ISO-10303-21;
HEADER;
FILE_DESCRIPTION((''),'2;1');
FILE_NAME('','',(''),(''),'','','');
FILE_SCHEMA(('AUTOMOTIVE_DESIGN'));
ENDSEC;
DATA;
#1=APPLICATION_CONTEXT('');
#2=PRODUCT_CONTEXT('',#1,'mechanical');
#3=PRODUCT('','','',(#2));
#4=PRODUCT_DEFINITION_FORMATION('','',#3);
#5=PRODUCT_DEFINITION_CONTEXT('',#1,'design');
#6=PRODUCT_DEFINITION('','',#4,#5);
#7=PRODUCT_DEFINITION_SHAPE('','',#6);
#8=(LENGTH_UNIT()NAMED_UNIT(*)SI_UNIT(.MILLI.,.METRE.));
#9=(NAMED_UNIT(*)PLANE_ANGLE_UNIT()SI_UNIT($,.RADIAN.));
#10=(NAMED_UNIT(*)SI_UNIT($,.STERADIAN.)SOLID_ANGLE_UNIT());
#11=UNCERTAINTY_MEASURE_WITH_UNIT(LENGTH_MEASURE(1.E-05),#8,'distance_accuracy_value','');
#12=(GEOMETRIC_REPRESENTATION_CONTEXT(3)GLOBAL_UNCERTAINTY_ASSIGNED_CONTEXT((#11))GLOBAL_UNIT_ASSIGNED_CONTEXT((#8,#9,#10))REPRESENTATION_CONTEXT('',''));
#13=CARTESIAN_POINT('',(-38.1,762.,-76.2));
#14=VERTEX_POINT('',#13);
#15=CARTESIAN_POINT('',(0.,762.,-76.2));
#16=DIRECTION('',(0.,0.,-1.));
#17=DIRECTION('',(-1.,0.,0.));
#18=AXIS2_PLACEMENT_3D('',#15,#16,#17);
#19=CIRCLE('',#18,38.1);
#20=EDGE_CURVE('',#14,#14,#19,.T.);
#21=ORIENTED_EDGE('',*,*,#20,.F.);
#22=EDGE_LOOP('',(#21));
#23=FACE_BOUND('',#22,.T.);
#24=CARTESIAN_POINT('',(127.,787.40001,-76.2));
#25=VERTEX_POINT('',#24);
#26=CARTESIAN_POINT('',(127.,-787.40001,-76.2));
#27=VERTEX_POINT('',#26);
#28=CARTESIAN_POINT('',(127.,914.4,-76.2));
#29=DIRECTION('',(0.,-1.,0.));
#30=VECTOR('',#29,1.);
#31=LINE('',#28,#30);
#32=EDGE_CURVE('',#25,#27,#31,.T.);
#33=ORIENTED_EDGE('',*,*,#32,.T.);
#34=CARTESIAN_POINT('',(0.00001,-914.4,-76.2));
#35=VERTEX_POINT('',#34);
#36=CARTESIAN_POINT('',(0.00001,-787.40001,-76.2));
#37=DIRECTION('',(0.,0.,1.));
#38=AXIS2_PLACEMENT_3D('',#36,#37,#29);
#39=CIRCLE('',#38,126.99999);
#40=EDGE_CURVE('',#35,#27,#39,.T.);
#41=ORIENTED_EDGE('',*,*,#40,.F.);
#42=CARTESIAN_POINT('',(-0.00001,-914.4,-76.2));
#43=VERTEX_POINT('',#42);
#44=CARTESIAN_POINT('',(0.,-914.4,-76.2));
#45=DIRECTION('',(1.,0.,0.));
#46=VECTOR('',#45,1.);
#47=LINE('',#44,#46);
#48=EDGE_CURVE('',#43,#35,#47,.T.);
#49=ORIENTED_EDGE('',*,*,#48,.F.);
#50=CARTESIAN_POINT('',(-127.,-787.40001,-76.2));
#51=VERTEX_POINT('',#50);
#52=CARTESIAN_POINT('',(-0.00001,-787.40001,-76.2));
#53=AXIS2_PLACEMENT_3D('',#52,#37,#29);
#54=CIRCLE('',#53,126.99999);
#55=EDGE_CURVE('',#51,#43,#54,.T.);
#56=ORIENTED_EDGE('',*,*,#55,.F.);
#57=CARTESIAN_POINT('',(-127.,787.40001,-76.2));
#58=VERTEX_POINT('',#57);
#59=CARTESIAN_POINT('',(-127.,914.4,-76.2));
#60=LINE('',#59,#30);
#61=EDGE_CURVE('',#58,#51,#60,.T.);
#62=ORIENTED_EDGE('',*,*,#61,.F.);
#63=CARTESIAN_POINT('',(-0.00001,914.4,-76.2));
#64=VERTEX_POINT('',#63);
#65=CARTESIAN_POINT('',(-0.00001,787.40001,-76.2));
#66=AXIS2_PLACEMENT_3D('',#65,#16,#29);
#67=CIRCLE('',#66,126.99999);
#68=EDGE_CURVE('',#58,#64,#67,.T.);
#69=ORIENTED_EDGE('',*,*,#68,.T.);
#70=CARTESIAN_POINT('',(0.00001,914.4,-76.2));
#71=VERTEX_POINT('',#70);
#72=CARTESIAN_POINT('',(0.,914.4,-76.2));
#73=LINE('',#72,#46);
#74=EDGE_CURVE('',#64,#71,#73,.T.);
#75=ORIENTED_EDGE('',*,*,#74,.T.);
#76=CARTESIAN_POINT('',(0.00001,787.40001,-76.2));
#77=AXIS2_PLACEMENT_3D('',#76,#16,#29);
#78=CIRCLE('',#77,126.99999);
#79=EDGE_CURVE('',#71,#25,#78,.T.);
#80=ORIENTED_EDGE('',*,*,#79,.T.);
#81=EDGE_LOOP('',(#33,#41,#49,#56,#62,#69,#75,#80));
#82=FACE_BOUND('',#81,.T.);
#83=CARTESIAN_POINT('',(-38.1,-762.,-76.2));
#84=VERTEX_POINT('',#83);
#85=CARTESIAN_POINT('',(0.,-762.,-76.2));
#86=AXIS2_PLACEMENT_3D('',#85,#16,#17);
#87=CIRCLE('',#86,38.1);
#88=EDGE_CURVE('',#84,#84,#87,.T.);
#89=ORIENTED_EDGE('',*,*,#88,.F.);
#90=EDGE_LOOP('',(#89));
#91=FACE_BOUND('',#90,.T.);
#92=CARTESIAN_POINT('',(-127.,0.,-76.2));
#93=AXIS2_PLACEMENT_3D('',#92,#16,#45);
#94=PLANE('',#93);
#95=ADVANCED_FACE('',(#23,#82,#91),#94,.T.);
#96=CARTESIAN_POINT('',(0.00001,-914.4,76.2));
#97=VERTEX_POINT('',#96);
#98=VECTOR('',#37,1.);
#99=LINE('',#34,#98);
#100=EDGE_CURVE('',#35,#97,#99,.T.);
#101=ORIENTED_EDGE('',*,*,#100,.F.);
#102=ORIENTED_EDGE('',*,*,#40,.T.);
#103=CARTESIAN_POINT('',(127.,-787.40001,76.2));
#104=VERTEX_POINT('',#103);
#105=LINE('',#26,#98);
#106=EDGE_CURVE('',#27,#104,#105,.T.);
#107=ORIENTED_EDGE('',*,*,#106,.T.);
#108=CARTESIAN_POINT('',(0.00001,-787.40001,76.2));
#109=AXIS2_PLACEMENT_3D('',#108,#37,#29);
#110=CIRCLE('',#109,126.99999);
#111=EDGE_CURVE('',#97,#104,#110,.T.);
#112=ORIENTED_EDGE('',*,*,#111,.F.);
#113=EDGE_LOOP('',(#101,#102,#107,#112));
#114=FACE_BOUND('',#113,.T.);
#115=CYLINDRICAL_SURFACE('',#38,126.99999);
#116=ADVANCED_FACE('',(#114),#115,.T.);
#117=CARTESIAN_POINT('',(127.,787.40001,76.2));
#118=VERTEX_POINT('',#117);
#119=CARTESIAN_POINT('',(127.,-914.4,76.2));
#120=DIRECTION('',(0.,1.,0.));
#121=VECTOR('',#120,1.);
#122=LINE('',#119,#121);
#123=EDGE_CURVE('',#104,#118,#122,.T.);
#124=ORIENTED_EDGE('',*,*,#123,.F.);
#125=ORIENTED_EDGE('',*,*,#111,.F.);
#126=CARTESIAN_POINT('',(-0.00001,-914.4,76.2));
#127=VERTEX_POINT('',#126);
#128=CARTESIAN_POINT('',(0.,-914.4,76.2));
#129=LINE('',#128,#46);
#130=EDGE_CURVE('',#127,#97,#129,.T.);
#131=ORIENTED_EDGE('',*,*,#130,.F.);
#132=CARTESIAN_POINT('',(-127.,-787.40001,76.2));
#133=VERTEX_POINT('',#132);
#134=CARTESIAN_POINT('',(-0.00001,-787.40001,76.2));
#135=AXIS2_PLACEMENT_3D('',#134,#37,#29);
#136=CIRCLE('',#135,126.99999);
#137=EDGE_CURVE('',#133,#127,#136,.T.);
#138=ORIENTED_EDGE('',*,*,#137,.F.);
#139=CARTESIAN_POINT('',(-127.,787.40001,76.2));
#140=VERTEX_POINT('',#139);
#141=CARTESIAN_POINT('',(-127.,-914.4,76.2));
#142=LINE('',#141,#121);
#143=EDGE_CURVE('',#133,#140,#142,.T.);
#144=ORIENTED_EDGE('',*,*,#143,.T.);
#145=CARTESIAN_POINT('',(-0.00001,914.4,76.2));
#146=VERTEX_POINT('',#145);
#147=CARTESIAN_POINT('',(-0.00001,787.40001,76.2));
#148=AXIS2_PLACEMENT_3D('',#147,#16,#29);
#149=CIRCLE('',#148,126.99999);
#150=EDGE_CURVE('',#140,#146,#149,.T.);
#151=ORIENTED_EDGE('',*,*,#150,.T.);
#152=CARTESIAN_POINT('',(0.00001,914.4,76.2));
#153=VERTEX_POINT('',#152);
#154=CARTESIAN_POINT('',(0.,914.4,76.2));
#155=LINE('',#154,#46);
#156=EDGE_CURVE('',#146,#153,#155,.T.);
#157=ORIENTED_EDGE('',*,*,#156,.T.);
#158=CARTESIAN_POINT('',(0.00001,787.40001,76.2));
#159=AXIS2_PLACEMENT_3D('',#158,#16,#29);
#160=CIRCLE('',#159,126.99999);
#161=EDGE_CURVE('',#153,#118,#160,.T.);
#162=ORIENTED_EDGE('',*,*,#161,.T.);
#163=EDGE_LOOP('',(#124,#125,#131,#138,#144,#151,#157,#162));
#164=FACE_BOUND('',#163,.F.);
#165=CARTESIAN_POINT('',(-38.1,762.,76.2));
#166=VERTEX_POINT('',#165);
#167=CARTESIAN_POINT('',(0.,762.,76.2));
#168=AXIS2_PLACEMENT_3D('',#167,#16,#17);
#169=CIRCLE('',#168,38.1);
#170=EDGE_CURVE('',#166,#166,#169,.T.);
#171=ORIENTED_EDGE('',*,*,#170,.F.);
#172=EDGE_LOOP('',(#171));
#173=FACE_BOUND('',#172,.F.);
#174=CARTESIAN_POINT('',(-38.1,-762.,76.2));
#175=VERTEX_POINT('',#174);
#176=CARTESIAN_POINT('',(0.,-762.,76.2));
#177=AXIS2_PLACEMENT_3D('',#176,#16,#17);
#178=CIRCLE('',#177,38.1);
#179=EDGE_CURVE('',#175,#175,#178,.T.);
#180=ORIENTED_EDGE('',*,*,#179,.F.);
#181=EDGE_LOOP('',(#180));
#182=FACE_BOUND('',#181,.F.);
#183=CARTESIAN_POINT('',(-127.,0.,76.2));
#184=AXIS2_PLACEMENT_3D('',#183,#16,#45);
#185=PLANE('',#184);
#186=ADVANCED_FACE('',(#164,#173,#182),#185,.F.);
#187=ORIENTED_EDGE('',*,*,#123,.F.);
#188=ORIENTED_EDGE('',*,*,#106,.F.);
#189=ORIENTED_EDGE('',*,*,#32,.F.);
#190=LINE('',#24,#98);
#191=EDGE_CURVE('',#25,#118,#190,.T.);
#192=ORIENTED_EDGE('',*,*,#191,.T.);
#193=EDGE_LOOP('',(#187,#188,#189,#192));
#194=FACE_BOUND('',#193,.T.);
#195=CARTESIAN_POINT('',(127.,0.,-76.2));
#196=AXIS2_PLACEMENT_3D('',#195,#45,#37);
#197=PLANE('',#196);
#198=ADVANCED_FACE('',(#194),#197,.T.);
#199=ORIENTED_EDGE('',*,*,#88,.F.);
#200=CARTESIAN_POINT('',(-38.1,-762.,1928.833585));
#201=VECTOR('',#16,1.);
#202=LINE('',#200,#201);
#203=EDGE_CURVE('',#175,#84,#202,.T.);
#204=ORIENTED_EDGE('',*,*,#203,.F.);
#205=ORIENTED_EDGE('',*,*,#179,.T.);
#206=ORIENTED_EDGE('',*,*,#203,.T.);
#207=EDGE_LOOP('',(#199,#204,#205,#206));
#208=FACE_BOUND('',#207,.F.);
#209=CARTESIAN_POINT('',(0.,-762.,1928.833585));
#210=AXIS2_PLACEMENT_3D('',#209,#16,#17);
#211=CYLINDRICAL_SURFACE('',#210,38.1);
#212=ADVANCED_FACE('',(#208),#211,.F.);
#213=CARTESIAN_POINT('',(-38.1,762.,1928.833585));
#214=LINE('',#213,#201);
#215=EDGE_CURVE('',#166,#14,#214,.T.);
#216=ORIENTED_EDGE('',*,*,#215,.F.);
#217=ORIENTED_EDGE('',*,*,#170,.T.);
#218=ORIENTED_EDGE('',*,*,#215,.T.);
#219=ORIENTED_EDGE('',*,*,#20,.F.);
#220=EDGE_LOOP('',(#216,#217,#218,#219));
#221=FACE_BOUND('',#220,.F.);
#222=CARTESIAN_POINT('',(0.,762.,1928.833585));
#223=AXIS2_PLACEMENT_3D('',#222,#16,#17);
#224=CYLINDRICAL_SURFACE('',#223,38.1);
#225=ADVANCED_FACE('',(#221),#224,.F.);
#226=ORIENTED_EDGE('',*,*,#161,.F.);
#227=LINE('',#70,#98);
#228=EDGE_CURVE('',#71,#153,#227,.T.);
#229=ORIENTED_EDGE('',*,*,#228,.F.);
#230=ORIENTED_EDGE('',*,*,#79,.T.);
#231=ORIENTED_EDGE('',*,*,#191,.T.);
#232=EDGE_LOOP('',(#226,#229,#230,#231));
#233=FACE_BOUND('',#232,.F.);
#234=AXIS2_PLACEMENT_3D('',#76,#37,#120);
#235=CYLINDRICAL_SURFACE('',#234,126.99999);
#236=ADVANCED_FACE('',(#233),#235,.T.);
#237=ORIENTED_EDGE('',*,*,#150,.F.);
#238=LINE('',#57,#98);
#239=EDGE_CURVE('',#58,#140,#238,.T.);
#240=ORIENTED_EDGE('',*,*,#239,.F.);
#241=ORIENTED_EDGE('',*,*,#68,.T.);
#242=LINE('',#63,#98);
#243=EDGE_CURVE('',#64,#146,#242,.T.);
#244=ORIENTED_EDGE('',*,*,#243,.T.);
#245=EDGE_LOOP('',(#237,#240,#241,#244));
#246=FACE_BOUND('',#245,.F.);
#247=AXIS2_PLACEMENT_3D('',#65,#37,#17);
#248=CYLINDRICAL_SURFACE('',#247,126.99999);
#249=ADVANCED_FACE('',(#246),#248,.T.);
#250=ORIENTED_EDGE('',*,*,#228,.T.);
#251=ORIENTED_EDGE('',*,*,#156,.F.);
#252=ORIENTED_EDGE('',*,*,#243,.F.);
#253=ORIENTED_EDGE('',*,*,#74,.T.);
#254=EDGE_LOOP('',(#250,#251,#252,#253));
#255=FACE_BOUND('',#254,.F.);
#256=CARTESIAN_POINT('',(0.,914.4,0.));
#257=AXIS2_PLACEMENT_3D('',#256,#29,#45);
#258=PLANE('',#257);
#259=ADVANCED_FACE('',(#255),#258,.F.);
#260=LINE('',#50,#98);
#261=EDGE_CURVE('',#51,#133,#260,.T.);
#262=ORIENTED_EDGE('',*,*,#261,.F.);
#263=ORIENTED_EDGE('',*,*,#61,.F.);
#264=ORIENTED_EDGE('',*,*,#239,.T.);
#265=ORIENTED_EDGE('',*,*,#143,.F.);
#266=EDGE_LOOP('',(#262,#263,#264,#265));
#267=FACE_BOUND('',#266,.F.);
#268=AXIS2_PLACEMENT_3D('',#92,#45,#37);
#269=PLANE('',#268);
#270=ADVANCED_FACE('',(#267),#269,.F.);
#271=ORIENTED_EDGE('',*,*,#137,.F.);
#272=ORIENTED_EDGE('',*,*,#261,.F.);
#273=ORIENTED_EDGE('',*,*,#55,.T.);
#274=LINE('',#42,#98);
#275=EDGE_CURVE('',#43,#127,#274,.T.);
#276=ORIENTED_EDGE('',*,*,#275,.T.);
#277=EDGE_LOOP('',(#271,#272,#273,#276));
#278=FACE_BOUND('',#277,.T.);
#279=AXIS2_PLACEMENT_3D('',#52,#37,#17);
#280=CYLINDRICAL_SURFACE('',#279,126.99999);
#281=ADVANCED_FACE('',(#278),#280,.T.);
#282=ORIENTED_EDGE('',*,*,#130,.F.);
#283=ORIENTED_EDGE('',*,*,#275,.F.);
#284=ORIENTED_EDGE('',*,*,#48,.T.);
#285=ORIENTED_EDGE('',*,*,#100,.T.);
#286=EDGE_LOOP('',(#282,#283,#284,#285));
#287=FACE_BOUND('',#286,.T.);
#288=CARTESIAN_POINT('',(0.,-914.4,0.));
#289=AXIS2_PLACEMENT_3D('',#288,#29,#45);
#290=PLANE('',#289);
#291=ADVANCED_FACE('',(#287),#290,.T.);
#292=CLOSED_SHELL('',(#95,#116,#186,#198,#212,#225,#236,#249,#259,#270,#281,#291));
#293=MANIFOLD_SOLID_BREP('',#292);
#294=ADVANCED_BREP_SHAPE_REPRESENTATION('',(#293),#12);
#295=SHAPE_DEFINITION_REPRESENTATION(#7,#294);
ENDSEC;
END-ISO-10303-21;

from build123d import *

# Parameters (mm, degrees)
F0_W     = 254
F0_H     = 152.4
F1_DEPTH = 914.4
F3_D     = 76.2
F4_R     = 126.99999


# Not quite as in the source:
# - a fillet or chamfer is up to 0.001 mm smaller than in the source, because OpenCascade refuses the exact size


with BuildPart() as f1:
    # F0 (on Front) → F1 (new body, symmetric)
    with BuildSketch(Plane.XZ):
        Rectangle(F0_W, F0_H)
    extrude(amount=F1_DEPTH, both=True)

    # F3 (through all)
    with Locations(Plane.XY.offset(76.2)):
        with Locations((0, 762), (0, -762)):
            Hole(F3_D / 2)

    # F4 (radius 127 in the source; OpenCascade refuses exactly that, so slightly less here)
    f4_edges = [f1.edges().sort_by_distance(p)[0] for p in [
        (127, -914.4, 0),
        (-127, -914.4, 0),
        (127, 914.4, 0),
        (-127, 914.4, 0),
    ]]
    fillet(f4_edges, radius=F4_R)


solid = f1.part
